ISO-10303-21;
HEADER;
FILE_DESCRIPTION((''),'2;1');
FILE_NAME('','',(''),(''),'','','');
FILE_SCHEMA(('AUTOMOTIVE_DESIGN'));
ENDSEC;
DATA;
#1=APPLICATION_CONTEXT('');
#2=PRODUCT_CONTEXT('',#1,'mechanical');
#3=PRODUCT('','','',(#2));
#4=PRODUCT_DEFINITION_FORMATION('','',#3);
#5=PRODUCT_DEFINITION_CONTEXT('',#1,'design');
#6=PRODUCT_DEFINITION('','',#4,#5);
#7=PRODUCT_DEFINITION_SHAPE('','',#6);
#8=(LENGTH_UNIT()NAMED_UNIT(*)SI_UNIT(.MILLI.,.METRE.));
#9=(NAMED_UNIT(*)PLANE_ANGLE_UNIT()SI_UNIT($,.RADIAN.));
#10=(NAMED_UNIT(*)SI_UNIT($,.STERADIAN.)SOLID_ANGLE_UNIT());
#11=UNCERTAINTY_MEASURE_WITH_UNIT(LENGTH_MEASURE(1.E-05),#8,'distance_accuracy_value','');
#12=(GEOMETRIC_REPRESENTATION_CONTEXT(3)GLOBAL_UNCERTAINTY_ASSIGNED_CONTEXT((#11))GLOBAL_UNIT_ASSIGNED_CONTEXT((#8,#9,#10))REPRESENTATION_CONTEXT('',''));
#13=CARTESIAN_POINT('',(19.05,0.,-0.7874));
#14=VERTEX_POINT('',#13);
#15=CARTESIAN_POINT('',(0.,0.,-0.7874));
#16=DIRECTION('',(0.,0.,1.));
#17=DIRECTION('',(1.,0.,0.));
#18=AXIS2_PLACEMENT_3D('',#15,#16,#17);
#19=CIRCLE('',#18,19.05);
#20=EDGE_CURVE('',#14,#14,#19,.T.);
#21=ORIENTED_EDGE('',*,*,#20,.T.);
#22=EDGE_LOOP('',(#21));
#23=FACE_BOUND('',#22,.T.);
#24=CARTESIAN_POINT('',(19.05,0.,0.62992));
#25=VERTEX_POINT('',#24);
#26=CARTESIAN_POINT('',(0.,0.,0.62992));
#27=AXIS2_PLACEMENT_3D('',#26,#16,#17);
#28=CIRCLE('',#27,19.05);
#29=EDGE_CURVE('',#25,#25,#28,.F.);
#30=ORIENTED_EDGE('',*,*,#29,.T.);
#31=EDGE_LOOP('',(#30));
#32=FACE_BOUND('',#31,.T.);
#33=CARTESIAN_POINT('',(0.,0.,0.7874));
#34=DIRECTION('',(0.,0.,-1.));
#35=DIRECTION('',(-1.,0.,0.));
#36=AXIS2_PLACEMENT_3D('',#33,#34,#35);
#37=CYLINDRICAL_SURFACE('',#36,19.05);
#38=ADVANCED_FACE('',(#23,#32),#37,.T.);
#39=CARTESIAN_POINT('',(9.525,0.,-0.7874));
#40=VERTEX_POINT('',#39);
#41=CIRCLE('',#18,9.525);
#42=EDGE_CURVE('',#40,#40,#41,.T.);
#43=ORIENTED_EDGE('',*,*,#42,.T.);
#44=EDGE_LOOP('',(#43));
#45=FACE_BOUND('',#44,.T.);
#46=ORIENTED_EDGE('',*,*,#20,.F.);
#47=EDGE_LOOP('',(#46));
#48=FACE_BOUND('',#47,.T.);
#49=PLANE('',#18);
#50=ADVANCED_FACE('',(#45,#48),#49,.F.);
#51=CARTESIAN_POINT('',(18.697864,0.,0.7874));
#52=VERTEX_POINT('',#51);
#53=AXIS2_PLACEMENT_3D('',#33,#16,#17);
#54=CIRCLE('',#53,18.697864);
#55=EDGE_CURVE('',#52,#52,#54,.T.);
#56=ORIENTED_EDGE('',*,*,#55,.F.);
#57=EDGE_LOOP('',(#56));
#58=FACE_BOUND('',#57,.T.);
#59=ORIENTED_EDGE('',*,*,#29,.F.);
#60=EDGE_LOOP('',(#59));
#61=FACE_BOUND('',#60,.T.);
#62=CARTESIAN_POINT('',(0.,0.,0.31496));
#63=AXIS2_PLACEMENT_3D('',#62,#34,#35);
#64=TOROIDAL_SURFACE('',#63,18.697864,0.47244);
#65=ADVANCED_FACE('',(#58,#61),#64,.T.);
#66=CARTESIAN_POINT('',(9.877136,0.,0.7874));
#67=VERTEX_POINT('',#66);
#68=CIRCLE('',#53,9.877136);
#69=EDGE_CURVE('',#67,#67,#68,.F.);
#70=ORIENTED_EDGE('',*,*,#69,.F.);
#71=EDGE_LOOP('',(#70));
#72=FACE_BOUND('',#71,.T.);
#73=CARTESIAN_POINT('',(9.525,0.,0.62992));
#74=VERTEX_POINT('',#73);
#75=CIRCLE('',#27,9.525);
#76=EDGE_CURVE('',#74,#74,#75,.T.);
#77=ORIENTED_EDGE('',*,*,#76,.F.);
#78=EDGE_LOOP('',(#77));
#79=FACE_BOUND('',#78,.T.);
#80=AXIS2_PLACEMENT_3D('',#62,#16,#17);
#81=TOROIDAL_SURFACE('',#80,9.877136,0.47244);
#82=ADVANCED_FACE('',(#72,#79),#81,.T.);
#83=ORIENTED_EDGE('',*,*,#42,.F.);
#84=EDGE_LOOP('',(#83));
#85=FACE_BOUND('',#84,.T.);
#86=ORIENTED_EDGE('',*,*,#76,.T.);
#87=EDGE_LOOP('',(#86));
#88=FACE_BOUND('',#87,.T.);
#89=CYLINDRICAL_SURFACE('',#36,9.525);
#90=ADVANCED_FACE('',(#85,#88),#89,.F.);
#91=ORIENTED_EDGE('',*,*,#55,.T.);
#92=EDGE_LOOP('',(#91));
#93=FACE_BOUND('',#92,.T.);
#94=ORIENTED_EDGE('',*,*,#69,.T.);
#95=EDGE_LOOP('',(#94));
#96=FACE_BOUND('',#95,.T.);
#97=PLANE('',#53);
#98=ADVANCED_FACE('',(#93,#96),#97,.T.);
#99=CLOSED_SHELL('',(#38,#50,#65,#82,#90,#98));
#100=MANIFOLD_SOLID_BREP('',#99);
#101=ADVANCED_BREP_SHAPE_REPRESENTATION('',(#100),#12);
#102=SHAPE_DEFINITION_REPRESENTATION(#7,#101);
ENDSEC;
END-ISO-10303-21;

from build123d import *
from OCP.BRepFilletAPI import BRepFilletAPI_MakeChamfer

# Parameters (mm, degrees)
BOSS_EXTRUDE1_START = -0.7874
SKETCH3_R           = 19.05
SKETCH3_R_2         = 9.525
BOSS_EXTRUDE1_DEPTH = 1.5748
CHAMFER1_SIZE       = 0.15748
CHAMFER1_SIZE2      = 0.09092112
FILLET1_R           = 0.47244


with BuildPart() as part:
    # Sketch3 → Boss-Extrude1 (new body)
    with BuildSketch(Plane.XY.offset(BOSS_EXTRUDE1_START)):
        Circle(SKETCH3_R)
        Circle(SKETCH3_R_2, mode=Mode.SUBTRACT)
    extrude(amount=BOSS_EXTRUDE1_DEPTH)

    # Chamfer1: one chamfer whose edges measure the first distance from different faces: ONE call of the kernel's chamfer builder (chamfer() names one face for all edges)
    chamfer1_edges_1 = [part.edges().sort_by_distance(p)[0] for p in [
        (-19.05, 0, 0.7874),
    ]]
    chamfer1_side_1 = [part.faces().sort_by_distance(p)[0] for p in [
        (-19.05, 0, 0),
    ]]
    chamfer1_edges_2 = [part.edges().sort_by_distance(p)[0] for p in [
        (-9.525, 0, 0.7874),
    ]]
    chamfer1_side_2 = [part.faces().sort_by_distance(p)[0] for p in [
        (-9.525, 0, 0),
    ]]
    chamfer1 = BRepFilletAPI_MakeChamfer(part.part.solid().wrapped)
    for e in chamfer1_edges_1:
        chamfer1.Add(CHAMFER1_SIZE, CHAMFER1_SIZE2, e.wrapped, chamfer1_side_1[0].wrapped)  # the first distance lies on this face
    for e in chamfer1_edges_2:
        chamfer1.Add(CHAMFER1_SIZE, CHAMFER1_SIZE2, e.wrapped, chamfer1_side_2[0].wrapped)  # the first distance lies on this face
    add(Compound.cast(chamfer1.Shape()), mode=Mode.REPLACE)

    # Fillet1
    # the kernel refuses this fillet: 0.47244 mm, written as the material it takes off along each edge
    with BuildSketch(Plane(origin=(0, 0, 0.7874), x_dir=(1, 0, 0), z_dir=(0, -1, 0))) as fillet1_piece_1:
        with BuildLine():
            CenterArc((18.697864015, -0.47244), FILLET1_R, 41.810314896, 48.189685104)
            Line((18.697864015, 0), (18.697864015, 0.0094488))
            Line((18.697864015, 0.0094488), (18.95907888, 0.0094488))
            Line((18.95907888, 0.0094488), (18.96726178, 0.0047244))
            ThreePointArc((18.96726178, 0.0047244), (19.012722341, -0.0740156), (19.05704272, -0.1511808))
            Line((19.05704272, -0.1511808), (19.05, -0.15748))
        make_face()
    revolve(axis=Axis((0, 0, 0.7874), (0, 0, 1)), mode=Mode.SUBTRACT)
    with BuildSketch(Plane(origin=(0, 0, 0.7874), x_dir=(1, 0, 0), z_dir=(0, -1, 0))) as fillet1_piece_2:
        with BuildLine():
            CenterArc((9.877135985, -0.47244), FILLET1_R, 90, 48.189685104)
            Line((9.525, -0.15748), (9.51795728, -0.1511808))
            ThreePointArc((9.51795728, -0.1511808), (9.562277659, -0.0740156), (9.60773822, 0.0047244))
            Line((9.60773822, 0.0047244), (9.61592112, 0.0094488))
            Line((9.61592112, 0.0094488), (9.877135985, 0.0094488))
            Line((9.877135985, 0.0094488), (9.877135985, 0))
        make_face()
    revolve(axis=Axis((0, 0, 0.7874), (0, 0, 1)), mode=Mode.SUBTRACT)


solid = part.part
